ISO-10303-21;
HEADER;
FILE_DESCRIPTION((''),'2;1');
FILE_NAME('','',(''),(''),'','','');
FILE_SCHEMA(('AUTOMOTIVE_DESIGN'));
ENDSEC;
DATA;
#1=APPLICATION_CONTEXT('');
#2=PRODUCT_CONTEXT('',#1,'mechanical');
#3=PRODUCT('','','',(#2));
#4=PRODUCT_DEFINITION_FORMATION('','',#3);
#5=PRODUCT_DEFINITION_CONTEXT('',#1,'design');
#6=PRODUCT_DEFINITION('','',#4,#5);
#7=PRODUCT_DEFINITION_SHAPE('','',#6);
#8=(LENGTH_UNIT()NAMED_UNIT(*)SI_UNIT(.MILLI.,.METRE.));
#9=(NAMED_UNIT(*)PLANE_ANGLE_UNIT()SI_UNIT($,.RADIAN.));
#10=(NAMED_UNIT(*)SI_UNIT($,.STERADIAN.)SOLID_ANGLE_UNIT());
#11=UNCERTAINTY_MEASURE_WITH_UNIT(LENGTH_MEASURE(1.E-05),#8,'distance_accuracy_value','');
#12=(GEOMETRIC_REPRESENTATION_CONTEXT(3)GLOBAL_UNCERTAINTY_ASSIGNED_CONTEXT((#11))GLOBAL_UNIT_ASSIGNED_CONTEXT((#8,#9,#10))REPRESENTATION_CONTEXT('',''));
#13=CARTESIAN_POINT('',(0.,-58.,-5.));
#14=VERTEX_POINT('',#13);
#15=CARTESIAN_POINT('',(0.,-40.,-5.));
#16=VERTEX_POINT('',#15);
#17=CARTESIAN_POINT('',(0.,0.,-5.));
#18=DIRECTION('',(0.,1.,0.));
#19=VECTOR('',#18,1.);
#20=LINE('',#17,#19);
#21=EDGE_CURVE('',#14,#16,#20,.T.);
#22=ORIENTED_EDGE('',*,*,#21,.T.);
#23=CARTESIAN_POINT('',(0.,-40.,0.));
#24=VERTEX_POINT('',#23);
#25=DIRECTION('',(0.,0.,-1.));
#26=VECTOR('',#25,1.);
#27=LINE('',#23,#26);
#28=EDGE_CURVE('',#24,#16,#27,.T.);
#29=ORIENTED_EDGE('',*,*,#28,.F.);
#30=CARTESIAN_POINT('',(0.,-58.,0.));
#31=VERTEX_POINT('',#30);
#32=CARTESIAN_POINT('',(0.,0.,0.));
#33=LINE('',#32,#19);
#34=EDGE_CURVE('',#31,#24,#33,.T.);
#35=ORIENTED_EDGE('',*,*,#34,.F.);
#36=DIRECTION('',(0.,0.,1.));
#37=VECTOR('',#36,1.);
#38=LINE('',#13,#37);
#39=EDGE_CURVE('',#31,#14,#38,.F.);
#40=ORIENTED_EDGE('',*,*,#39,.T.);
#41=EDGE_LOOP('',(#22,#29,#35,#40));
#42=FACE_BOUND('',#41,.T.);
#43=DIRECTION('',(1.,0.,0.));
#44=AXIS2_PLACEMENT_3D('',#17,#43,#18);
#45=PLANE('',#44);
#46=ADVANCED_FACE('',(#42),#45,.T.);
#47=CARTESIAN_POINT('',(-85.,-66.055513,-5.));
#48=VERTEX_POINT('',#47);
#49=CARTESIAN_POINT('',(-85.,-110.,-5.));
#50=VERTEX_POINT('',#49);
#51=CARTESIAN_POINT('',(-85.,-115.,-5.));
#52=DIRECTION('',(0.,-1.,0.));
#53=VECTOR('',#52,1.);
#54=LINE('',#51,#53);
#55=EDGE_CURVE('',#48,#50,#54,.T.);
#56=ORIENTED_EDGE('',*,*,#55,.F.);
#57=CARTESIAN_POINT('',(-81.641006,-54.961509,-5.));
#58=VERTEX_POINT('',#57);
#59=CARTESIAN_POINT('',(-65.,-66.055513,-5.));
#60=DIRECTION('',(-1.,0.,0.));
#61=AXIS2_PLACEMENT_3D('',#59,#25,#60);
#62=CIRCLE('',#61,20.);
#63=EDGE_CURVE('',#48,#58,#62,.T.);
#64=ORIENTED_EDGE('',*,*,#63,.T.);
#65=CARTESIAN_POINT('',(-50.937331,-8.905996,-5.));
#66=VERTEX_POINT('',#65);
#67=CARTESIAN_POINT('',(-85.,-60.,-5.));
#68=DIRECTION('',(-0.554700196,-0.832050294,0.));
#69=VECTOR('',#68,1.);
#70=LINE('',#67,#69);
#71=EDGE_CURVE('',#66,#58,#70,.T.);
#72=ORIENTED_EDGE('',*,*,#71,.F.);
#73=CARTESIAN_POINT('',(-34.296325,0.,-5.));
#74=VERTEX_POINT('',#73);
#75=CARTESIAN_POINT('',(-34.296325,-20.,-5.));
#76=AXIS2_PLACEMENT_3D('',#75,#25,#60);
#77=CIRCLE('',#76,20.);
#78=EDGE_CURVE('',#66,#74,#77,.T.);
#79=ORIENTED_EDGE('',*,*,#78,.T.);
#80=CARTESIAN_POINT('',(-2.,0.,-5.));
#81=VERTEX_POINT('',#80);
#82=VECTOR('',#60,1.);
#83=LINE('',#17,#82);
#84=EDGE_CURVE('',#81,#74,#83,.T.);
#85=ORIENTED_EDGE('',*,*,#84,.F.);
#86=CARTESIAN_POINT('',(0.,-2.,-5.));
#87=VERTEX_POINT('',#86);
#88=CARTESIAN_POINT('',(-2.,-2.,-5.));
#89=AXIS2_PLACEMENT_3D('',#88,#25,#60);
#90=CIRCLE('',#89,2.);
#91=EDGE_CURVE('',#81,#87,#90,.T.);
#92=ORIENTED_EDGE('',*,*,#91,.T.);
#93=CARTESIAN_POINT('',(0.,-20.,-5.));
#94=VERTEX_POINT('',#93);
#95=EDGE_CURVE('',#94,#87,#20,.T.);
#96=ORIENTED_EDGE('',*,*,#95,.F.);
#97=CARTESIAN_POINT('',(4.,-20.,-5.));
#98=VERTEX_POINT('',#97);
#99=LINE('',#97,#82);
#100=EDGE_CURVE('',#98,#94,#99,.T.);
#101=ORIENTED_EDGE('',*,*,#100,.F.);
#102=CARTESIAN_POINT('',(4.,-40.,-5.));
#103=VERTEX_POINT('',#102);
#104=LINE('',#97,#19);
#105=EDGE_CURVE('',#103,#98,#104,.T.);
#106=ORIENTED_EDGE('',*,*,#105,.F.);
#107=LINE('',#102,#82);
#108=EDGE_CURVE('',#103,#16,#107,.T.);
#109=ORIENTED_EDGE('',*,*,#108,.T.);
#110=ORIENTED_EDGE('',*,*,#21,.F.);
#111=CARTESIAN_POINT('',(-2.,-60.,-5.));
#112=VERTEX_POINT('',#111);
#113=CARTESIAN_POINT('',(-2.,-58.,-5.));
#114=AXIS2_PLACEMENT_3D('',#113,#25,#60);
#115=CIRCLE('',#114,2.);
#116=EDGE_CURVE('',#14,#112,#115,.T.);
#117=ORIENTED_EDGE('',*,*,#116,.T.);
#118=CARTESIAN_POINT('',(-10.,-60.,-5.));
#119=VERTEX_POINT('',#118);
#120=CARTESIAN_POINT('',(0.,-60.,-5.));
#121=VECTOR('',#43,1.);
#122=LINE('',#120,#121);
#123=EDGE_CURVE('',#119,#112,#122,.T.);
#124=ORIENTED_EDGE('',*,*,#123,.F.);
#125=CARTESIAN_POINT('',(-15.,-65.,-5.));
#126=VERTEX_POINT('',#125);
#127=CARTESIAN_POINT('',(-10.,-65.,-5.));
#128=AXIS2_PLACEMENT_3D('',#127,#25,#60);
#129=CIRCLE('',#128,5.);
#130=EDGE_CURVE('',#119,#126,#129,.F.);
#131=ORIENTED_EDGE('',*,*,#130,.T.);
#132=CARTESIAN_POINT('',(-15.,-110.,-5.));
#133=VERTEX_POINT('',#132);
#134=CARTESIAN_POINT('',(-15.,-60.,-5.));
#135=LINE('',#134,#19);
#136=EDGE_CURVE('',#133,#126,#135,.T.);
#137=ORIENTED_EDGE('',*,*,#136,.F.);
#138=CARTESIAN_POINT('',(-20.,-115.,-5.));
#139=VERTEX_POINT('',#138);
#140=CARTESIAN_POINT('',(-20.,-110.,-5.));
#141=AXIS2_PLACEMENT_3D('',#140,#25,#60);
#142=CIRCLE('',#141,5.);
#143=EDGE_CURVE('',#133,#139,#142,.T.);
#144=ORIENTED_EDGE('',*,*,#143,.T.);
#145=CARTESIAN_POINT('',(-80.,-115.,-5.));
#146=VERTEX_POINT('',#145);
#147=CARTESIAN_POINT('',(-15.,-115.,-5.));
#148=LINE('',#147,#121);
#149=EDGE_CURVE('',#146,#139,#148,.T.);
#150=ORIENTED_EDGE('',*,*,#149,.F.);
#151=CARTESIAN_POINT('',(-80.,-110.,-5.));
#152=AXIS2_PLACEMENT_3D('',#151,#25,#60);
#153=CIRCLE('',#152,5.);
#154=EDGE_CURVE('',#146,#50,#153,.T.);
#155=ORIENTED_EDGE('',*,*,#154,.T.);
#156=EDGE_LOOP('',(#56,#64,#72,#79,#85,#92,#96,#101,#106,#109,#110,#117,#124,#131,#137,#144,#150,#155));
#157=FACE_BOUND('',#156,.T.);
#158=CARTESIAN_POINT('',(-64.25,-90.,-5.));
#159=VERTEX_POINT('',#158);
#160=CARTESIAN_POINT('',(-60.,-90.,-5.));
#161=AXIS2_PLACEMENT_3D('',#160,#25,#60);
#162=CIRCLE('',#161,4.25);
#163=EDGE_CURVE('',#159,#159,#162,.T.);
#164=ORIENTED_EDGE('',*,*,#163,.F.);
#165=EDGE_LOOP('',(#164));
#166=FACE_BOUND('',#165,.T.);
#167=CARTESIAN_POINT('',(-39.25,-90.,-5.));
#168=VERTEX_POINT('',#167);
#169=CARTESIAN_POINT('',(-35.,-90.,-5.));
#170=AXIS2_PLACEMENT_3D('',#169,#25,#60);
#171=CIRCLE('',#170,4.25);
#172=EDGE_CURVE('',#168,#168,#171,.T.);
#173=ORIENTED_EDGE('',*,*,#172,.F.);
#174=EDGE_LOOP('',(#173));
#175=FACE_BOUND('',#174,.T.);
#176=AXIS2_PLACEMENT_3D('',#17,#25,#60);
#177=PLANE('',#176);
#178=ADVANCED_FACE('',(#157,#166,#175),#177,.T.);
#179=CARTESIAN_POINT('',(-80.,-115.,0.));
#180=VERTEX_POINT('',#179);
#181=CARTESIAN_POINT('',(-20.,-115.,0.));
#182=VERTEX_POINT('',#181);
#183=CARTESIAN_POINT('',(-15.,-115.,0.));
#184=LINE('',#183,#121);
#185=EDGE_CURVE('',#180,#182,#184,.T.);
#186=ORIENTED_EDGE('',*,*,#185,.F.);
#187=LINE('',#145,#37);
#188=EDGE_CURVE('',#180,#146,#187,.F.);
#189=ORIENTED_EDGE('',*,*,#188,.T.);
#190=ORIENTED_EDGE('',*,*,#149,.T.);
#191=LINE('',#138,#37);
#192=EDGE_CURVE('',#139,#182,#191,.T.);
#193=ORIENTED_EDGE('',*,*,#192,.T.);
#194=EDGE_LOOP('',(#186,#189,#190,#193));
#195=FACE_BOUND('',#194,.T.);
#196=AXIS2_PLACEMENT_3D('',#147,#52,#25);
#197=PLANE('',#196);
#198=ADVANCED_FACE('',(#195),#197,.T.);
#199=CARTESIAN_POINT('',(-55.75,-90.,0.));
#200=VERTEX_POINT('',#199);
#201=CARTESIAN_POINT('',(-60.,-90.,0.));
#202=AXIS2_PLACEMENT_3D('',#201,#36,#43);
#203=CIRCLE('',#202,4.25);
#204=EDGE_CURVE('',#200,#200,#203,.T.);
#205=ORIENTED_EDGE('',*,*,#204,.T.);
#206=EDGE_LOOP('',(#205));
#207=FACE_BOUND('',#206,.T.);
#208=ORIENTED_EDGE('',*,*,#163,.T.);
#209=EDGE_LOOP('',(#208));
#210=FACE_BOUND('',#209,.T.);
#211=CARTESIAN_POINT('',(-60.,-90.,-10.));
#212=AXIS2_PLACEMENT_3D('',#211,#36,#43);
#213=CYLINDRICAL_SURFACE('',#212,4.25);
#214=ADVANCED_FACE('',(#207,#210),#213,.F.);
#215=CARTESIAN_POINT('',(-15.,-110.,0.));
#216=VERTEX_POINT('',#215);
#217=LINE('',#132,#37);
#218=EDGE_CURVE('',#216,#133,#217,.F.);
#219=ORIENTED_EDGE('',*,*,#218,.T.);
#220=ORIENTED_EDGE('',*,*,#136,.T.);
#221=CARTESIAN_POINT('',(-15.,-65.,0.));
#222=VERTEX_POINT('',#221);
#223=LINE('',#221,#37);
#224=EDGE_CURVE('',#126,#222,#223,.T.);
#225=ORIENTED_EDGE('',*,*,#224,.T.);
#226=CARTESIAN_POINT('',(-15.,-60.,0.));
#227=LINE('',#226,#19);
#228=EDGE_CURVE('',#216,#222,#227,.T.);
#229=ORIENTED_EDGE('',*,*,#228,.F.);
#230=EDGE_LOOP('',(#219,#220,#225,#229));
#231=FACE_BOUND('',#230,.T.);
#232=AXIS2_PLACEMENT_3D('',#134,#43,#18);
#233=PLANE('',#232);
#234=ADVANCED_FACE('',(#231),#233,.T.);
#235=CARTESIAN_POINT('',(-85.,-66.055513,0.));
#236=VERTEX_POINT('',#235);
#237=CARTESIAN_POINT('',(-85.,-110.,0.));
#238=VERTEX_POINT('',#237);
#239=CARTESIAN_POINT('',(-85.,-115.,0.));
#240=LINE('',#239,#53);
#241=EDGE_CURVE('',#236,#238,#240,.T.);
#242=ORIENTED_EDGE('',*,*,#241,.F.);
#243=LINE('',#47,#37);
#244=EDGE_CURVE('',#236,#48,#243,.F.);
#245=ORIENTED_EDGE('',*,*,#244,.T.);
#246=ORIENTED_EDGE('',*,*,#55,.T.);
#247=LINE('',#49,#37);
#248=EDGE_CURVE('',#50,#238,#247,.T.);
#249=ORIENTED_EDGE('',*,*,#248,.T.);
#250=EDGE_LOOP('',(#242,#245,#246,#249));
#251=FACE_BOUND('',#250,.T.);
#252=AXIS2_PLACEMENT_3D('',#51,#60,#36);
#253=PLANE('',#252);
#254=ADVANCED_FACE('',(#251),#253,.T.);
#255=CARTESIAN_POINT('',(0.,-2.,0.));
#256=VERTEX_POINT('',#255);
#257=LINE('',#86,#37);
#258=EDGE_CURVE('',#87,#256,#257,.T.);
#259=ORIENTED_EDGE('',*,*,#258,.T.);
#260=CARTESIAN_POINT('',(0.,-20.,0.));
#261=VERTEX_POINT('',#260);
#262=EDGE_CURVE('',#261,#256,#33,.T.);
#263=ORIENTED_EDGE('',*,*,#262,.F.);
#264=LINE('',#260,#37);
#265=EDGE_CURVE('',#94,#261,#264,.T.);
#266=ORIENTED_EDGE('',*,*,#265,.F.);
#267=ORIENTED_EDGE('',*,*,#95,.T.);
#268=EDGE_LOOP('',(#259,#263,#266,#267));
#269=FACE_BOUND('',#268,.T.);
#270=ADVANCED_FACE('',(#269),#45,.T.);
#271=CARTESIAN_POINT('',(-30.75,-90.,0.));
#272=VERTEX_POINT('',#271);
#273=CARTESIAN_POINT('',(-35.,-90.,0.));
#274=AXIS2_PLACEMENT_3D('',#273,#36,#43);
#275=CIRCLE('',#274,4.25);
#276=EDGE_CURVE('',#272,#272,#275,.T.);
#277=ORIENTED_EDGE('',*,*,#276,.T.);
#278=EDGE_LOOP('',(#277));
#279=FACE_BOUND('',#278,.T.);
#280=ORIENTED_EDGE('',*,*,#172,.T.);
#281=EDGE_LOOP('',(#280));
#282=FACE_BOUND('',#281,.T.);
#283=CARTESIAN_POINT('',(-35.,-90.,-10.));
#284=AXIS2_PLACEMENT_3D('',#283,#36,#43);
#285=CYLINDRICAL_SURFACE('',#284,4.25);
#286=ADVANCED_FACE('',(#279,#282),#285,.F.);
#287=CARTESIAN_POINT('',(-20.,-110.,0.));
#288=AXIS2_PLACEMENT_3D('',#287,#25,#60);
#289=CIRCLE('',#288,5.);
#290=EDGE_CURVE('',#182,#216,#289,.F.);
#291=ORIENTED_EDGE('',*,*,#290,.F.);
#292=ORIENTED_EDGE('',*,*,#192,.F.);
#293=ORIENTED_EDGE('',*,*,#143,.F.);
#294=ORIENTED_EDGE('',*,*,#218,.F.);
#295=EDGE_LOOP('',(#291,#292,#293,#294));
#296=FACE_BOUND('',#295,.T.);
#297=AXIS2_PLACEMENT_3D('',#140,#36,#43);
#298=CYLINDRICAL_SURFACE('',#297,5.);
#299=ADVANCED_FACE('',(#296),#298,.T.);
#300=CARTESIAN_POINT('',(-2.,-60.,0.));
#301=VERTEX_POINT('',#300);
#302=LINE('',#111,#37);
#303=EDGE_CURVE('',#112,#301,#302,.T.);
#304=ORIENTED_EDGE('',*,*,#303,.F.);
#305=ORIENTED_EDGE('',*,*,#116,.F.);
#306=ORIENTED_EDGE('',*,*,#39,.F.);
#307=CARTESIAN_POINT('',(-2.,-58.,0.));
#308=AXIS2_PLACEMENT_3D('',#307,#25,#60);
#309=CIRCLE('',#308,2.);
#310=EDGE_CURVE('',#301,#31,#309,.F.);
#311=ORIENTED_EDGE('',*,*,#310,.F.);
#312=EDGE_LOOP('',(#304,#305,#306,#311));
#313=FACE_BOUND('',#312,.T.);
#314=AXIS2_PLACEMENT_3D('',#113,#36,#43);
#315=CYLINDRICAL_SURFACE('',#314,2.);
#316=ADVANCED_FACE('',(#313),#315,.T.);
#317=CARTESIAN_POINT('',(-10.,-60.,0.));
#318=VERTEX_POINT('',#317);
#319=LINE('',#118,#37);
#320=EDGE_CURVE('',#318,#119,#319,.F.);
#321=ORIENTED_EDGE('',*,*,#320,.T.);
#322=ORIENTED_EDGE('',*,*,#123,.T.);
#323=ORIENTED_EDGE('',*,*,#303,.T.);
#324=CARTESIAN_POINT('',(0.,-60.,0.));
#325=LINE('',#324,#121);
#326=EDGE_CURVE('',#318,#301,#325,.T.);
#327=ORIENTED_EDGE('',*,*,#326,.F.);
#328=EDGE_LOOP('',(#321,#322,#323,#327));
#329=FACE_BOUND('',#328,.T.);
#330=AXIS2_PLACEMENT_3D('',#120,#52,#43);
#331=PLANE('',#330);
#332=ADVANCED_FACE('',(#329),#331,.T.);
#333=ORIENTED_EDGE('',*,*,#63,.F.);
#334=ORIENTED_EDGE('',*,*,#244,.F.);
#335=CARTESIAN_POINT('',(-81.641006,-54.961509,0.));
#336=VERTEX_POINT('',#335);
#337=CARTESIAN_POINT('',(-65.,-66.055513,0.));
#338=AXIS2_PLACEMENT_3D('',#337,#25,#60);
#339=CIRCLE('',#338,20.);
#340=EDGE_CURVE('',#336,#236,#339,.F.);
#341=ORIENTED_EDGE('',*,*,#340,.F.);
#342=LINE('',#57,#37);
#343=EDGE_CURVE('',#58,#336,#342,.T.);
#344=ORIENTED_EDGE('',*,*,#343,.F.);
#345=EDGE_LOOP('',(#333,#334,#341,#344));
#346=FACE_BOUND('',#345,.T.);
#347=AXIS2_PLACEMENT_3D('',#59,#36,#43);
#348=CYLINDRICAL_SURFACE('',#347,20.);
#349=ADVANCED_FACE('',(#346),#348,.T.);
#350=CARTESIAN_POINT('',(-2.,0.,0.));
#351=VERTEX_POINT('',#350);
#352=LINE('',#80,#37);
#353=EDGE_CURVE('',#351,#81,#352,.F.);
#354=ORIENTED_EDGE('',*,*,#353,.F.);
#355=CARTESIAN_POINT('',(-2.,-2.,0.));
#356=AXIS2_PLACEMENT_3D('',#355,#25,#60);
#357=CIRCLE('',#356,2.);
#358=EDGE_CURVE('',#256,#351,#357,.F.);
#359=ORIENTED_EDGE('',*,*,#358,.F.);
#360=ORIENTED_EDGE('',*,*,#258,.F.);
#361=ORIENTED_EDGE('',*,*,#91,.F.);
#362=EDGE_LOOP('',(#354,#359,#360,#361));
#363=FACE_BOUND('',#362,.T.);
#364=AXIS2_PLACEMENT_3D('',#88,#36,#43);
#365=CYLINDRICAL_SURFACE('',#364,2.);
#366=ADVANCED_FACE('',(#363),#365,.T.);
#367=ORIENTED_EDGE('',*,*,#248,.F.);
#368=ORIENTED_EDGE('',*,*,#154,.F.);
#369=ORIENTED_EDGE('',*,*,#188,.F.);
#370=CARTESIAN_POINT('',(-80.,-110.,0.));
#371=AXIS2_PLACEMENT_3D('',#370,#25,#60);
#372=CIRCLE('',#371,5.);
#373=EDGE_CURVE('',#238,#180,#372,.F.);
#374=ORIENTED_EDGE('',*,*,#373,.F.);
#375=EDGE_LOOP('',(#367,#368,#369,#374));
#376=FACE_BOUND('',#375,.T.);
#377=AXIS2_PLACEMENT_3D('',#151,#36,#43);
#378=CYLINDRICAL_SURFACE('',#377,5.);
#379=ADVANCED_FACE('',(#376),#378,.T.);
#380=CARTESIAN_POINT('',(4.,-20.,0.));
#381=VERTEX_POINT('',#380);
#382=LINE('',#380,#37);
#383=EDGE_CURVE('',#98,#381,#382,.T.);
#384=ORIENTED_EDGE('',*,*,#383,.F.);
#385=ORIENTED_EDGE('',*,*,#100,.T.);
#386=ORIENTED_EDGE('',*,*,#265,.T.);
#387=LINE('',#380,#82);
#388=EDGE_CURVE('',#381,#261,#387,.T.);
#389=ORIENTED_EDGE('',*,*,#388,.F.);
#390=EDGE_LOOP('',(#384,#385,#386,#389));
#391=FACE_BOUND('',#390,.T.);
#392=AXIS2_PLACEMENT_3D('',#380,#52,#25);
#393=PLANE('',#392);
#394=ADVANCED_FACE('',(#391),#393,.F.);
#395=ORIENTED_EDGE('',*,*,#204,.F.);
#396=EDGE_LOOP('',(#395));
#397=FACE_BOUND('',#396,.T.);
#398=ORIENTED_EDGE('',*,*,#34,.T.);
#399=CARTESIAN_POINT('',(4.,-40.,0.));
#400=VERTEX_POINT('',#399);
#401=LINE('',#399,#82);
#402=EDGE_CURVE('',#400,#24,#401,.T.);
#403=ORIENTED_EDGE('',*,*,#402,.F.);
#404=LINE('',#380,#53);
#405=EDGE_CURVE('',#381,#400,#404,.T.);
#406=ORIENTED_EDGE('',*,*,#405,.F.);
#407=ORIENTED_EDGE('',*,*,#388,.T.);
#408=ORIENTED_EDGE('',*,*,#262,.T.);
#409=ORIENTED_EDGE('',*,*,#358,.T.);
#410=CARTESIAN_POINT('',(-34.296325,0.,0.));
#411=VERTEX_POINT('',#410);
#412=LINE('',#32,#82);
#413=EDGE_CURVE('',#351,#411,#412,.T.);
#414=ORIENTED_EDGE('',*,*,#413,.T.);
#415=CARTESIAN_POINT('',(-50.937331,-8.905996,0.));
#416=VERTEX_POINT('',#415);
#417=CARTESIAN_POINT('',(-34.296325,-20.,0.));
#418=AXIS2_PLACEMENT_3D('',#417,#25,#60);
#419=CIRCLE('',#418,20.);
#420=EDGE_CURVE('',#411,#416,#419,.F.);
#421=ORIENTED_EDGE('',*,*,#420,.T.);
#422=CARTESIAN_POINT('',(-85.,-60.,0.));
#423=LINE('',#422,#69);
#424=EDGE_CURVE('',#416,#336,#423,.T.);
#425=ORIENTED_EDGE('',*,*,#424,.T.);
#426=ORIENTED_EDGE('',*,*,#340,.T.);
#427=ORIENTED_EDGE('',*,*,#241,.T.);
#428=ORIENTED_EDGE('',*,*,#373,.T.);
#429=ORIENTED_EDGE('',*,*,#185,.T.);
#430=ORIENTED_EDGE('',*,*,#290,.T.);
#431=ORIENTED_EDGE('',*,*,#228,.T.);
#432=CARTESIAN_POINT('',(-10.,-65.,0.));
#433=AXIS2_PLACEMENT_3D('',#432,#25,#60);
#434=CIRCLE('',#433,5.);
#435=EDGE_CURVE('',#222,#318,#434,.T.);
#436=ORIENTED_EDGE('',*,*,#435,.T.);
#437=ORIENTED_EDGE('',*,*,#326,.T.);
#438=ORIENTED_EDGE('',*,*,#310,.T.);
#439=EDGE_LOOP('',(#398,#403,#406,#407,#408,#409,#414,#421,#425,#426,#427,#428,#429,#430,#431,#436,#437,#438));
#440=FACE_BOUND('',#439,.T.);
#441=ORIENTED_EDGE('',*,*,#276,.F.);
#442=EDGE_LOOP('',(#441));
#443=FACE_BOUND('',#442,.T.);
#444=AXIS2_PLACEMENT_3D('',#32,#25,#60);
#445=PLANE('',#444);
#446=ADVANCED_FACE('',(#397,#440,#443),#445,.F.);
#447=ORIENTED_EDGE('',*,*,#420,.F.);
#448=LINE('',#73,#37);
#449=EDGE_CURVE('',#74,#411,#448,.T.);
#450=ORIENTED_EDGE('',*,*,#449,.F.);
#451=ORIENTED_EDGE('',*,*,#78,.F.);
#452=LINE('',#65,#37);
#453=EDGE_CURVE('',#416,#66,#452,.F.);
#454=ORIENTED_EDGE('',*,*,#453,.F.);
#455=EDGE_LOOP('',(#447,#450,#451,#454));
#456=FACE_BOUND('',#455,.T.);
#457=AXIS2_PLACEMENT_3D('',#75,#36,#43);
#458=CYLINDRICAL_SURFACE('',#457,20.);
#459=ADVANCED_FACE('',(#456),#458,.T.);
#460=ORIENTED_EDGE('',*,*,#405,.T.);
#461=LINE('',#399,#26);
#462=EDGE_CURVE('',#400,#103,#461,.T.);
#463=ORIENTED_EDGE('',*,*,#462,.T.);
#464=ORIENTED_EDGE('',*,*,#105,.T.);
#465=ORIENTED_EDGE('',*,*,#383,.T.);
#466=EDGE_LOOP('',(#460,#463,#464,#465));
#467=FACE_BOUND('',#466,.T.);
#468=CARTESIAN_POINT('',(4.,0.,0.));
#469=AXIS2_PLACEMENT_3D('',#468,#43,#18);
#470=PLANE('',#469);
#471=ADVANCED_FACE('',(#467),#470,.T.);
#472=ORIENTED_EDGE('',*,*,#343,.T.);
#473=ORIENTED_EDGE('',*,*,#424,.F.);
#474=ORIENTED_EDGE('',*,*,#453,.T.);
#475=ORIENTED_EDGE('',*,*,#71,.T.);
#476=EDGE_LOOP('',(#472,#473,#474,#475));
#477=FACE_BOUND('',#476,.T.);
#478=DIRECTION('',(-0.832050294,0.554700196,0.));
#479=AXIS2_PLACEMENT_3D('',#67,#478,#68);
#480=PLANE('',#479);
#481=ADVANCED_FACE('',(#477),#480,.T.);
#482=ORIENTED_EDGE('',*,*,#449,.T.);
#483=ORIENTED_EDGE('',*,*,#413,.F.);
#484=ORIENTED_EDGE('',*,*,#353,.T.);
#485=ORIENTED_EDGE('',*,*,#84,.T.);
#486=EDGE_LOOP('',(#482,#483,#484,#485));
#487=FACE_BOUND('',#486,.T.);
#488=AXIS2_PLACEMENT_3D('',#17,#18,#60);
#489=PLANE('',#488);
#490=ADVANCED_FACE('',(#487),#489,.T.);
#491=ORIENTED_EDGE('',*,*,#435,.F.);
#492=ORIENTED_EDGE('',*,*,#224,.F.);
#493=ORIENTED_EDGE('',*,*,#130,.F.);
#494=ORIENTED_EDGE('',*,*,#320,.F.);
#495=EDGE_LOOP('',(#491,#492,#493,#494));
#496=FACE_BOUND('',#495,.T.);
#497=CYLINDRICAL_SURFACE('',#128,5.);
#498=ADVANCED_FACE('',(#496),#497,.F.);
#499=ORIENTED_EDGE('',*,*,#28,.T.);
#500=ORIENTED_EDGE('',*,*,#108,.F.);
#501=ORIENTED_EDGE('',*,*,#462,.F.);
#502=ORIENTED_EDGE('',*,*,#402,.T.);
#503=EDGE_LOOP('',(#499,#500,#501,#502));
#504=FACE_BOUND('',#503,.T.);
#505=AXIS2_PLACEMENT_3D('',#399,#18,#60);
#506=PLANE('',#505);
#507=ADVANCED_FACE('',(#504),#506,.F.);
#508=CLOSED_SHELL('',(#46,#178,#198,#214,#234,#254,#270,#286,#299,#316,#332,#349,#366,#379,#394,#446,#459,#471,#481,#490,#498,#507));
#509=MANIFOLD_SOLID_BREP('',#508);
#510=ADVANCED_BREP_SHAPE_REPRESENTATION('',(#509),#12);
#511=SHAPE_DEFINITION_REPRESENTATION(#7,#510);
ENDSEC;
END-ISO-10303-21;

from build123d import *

# Parameters (mm, degrees)
TABAN_FLAN_1_DEPTH          = 5
IZIM8_R                     = 4.25
KES_EKSTR_ZYON1_DEPTH       = 10
RADYUS1_R                   = 20
RADYUS2_R                   = 5
RADYUS3_R                   = 2
IZIM10_W                    = 5
IZIM10_H                    = 20
Y_KSEKLIK_EKSTR_ZYON1_DEPTH = 4


# Sheet-metal steps are written as plain solids
with BuildPart() as part:
    # Çizim1 → Taban-Flanş1 (new body)
    with BuildSketch(Plane.XY):
        Polygon((0, 0), (-45, 0), (-85, -60), (-85, -115), (-15, -115), (-15, -60), (0, -60), align=None)
    extrude(amount=-TABAN_FLAN_1_DEPTH)

    # Çizim8 → Kes-Ekstrüzyon1 (cut)
    with BuildSketch(Plane.XY):
        with Locations((-35, -90)):
            Circle(IZIM8_R)
        with Locations((-60, -90)):
            Circle(IZIM8_R)
    extrude(amount=-KES_EKSTR_ZYON1_DEPTH, mode=Mode.SUBTRACT)

    # Radyus1
    radyus1_edges = [part.edges().sort_by_distance(p)[0] for p in [
        (-85, -60, -2.5),
        (-45, 0, -2.5),
    ]]
    fillet(radyus1_edges, radius=RADYUS1_R)

    # Radyus2
    radyus2_edges = [part.edges().sort_by_distance(p)[0] for p in [
        (-15, -60, -2.5),
        (-15, -115, -2.5),
        (-85, -115, -2.5),
    ]]
    fillet(radyus2_edges, radius=RADYUS2_R)

    # Radyus3
    radyus3_edges = [part.edges().sort_by_distance(p)[0] for p in [
        (0, -60, -2.5),
        (0, 0, -2.5),
    ]]
    fillet(radyus3_edges, radius=RADYUS3_R)

    # Çizim10 → Yükseklik-Ekstrüzyon1 (add)
    with BuildSketch(Plane(origin=(0, 0, 0), x_dir=(0, 0, -1), z_dir=(1, 0, 0))):
        with Locations((2.5, -30)):
            Rectangle(IZIM10_W, IZIM10_H)
    extrude(amount=Y_KSEKLIK_EKSTR_ZYON1_DEPTH)


solid = part.part
